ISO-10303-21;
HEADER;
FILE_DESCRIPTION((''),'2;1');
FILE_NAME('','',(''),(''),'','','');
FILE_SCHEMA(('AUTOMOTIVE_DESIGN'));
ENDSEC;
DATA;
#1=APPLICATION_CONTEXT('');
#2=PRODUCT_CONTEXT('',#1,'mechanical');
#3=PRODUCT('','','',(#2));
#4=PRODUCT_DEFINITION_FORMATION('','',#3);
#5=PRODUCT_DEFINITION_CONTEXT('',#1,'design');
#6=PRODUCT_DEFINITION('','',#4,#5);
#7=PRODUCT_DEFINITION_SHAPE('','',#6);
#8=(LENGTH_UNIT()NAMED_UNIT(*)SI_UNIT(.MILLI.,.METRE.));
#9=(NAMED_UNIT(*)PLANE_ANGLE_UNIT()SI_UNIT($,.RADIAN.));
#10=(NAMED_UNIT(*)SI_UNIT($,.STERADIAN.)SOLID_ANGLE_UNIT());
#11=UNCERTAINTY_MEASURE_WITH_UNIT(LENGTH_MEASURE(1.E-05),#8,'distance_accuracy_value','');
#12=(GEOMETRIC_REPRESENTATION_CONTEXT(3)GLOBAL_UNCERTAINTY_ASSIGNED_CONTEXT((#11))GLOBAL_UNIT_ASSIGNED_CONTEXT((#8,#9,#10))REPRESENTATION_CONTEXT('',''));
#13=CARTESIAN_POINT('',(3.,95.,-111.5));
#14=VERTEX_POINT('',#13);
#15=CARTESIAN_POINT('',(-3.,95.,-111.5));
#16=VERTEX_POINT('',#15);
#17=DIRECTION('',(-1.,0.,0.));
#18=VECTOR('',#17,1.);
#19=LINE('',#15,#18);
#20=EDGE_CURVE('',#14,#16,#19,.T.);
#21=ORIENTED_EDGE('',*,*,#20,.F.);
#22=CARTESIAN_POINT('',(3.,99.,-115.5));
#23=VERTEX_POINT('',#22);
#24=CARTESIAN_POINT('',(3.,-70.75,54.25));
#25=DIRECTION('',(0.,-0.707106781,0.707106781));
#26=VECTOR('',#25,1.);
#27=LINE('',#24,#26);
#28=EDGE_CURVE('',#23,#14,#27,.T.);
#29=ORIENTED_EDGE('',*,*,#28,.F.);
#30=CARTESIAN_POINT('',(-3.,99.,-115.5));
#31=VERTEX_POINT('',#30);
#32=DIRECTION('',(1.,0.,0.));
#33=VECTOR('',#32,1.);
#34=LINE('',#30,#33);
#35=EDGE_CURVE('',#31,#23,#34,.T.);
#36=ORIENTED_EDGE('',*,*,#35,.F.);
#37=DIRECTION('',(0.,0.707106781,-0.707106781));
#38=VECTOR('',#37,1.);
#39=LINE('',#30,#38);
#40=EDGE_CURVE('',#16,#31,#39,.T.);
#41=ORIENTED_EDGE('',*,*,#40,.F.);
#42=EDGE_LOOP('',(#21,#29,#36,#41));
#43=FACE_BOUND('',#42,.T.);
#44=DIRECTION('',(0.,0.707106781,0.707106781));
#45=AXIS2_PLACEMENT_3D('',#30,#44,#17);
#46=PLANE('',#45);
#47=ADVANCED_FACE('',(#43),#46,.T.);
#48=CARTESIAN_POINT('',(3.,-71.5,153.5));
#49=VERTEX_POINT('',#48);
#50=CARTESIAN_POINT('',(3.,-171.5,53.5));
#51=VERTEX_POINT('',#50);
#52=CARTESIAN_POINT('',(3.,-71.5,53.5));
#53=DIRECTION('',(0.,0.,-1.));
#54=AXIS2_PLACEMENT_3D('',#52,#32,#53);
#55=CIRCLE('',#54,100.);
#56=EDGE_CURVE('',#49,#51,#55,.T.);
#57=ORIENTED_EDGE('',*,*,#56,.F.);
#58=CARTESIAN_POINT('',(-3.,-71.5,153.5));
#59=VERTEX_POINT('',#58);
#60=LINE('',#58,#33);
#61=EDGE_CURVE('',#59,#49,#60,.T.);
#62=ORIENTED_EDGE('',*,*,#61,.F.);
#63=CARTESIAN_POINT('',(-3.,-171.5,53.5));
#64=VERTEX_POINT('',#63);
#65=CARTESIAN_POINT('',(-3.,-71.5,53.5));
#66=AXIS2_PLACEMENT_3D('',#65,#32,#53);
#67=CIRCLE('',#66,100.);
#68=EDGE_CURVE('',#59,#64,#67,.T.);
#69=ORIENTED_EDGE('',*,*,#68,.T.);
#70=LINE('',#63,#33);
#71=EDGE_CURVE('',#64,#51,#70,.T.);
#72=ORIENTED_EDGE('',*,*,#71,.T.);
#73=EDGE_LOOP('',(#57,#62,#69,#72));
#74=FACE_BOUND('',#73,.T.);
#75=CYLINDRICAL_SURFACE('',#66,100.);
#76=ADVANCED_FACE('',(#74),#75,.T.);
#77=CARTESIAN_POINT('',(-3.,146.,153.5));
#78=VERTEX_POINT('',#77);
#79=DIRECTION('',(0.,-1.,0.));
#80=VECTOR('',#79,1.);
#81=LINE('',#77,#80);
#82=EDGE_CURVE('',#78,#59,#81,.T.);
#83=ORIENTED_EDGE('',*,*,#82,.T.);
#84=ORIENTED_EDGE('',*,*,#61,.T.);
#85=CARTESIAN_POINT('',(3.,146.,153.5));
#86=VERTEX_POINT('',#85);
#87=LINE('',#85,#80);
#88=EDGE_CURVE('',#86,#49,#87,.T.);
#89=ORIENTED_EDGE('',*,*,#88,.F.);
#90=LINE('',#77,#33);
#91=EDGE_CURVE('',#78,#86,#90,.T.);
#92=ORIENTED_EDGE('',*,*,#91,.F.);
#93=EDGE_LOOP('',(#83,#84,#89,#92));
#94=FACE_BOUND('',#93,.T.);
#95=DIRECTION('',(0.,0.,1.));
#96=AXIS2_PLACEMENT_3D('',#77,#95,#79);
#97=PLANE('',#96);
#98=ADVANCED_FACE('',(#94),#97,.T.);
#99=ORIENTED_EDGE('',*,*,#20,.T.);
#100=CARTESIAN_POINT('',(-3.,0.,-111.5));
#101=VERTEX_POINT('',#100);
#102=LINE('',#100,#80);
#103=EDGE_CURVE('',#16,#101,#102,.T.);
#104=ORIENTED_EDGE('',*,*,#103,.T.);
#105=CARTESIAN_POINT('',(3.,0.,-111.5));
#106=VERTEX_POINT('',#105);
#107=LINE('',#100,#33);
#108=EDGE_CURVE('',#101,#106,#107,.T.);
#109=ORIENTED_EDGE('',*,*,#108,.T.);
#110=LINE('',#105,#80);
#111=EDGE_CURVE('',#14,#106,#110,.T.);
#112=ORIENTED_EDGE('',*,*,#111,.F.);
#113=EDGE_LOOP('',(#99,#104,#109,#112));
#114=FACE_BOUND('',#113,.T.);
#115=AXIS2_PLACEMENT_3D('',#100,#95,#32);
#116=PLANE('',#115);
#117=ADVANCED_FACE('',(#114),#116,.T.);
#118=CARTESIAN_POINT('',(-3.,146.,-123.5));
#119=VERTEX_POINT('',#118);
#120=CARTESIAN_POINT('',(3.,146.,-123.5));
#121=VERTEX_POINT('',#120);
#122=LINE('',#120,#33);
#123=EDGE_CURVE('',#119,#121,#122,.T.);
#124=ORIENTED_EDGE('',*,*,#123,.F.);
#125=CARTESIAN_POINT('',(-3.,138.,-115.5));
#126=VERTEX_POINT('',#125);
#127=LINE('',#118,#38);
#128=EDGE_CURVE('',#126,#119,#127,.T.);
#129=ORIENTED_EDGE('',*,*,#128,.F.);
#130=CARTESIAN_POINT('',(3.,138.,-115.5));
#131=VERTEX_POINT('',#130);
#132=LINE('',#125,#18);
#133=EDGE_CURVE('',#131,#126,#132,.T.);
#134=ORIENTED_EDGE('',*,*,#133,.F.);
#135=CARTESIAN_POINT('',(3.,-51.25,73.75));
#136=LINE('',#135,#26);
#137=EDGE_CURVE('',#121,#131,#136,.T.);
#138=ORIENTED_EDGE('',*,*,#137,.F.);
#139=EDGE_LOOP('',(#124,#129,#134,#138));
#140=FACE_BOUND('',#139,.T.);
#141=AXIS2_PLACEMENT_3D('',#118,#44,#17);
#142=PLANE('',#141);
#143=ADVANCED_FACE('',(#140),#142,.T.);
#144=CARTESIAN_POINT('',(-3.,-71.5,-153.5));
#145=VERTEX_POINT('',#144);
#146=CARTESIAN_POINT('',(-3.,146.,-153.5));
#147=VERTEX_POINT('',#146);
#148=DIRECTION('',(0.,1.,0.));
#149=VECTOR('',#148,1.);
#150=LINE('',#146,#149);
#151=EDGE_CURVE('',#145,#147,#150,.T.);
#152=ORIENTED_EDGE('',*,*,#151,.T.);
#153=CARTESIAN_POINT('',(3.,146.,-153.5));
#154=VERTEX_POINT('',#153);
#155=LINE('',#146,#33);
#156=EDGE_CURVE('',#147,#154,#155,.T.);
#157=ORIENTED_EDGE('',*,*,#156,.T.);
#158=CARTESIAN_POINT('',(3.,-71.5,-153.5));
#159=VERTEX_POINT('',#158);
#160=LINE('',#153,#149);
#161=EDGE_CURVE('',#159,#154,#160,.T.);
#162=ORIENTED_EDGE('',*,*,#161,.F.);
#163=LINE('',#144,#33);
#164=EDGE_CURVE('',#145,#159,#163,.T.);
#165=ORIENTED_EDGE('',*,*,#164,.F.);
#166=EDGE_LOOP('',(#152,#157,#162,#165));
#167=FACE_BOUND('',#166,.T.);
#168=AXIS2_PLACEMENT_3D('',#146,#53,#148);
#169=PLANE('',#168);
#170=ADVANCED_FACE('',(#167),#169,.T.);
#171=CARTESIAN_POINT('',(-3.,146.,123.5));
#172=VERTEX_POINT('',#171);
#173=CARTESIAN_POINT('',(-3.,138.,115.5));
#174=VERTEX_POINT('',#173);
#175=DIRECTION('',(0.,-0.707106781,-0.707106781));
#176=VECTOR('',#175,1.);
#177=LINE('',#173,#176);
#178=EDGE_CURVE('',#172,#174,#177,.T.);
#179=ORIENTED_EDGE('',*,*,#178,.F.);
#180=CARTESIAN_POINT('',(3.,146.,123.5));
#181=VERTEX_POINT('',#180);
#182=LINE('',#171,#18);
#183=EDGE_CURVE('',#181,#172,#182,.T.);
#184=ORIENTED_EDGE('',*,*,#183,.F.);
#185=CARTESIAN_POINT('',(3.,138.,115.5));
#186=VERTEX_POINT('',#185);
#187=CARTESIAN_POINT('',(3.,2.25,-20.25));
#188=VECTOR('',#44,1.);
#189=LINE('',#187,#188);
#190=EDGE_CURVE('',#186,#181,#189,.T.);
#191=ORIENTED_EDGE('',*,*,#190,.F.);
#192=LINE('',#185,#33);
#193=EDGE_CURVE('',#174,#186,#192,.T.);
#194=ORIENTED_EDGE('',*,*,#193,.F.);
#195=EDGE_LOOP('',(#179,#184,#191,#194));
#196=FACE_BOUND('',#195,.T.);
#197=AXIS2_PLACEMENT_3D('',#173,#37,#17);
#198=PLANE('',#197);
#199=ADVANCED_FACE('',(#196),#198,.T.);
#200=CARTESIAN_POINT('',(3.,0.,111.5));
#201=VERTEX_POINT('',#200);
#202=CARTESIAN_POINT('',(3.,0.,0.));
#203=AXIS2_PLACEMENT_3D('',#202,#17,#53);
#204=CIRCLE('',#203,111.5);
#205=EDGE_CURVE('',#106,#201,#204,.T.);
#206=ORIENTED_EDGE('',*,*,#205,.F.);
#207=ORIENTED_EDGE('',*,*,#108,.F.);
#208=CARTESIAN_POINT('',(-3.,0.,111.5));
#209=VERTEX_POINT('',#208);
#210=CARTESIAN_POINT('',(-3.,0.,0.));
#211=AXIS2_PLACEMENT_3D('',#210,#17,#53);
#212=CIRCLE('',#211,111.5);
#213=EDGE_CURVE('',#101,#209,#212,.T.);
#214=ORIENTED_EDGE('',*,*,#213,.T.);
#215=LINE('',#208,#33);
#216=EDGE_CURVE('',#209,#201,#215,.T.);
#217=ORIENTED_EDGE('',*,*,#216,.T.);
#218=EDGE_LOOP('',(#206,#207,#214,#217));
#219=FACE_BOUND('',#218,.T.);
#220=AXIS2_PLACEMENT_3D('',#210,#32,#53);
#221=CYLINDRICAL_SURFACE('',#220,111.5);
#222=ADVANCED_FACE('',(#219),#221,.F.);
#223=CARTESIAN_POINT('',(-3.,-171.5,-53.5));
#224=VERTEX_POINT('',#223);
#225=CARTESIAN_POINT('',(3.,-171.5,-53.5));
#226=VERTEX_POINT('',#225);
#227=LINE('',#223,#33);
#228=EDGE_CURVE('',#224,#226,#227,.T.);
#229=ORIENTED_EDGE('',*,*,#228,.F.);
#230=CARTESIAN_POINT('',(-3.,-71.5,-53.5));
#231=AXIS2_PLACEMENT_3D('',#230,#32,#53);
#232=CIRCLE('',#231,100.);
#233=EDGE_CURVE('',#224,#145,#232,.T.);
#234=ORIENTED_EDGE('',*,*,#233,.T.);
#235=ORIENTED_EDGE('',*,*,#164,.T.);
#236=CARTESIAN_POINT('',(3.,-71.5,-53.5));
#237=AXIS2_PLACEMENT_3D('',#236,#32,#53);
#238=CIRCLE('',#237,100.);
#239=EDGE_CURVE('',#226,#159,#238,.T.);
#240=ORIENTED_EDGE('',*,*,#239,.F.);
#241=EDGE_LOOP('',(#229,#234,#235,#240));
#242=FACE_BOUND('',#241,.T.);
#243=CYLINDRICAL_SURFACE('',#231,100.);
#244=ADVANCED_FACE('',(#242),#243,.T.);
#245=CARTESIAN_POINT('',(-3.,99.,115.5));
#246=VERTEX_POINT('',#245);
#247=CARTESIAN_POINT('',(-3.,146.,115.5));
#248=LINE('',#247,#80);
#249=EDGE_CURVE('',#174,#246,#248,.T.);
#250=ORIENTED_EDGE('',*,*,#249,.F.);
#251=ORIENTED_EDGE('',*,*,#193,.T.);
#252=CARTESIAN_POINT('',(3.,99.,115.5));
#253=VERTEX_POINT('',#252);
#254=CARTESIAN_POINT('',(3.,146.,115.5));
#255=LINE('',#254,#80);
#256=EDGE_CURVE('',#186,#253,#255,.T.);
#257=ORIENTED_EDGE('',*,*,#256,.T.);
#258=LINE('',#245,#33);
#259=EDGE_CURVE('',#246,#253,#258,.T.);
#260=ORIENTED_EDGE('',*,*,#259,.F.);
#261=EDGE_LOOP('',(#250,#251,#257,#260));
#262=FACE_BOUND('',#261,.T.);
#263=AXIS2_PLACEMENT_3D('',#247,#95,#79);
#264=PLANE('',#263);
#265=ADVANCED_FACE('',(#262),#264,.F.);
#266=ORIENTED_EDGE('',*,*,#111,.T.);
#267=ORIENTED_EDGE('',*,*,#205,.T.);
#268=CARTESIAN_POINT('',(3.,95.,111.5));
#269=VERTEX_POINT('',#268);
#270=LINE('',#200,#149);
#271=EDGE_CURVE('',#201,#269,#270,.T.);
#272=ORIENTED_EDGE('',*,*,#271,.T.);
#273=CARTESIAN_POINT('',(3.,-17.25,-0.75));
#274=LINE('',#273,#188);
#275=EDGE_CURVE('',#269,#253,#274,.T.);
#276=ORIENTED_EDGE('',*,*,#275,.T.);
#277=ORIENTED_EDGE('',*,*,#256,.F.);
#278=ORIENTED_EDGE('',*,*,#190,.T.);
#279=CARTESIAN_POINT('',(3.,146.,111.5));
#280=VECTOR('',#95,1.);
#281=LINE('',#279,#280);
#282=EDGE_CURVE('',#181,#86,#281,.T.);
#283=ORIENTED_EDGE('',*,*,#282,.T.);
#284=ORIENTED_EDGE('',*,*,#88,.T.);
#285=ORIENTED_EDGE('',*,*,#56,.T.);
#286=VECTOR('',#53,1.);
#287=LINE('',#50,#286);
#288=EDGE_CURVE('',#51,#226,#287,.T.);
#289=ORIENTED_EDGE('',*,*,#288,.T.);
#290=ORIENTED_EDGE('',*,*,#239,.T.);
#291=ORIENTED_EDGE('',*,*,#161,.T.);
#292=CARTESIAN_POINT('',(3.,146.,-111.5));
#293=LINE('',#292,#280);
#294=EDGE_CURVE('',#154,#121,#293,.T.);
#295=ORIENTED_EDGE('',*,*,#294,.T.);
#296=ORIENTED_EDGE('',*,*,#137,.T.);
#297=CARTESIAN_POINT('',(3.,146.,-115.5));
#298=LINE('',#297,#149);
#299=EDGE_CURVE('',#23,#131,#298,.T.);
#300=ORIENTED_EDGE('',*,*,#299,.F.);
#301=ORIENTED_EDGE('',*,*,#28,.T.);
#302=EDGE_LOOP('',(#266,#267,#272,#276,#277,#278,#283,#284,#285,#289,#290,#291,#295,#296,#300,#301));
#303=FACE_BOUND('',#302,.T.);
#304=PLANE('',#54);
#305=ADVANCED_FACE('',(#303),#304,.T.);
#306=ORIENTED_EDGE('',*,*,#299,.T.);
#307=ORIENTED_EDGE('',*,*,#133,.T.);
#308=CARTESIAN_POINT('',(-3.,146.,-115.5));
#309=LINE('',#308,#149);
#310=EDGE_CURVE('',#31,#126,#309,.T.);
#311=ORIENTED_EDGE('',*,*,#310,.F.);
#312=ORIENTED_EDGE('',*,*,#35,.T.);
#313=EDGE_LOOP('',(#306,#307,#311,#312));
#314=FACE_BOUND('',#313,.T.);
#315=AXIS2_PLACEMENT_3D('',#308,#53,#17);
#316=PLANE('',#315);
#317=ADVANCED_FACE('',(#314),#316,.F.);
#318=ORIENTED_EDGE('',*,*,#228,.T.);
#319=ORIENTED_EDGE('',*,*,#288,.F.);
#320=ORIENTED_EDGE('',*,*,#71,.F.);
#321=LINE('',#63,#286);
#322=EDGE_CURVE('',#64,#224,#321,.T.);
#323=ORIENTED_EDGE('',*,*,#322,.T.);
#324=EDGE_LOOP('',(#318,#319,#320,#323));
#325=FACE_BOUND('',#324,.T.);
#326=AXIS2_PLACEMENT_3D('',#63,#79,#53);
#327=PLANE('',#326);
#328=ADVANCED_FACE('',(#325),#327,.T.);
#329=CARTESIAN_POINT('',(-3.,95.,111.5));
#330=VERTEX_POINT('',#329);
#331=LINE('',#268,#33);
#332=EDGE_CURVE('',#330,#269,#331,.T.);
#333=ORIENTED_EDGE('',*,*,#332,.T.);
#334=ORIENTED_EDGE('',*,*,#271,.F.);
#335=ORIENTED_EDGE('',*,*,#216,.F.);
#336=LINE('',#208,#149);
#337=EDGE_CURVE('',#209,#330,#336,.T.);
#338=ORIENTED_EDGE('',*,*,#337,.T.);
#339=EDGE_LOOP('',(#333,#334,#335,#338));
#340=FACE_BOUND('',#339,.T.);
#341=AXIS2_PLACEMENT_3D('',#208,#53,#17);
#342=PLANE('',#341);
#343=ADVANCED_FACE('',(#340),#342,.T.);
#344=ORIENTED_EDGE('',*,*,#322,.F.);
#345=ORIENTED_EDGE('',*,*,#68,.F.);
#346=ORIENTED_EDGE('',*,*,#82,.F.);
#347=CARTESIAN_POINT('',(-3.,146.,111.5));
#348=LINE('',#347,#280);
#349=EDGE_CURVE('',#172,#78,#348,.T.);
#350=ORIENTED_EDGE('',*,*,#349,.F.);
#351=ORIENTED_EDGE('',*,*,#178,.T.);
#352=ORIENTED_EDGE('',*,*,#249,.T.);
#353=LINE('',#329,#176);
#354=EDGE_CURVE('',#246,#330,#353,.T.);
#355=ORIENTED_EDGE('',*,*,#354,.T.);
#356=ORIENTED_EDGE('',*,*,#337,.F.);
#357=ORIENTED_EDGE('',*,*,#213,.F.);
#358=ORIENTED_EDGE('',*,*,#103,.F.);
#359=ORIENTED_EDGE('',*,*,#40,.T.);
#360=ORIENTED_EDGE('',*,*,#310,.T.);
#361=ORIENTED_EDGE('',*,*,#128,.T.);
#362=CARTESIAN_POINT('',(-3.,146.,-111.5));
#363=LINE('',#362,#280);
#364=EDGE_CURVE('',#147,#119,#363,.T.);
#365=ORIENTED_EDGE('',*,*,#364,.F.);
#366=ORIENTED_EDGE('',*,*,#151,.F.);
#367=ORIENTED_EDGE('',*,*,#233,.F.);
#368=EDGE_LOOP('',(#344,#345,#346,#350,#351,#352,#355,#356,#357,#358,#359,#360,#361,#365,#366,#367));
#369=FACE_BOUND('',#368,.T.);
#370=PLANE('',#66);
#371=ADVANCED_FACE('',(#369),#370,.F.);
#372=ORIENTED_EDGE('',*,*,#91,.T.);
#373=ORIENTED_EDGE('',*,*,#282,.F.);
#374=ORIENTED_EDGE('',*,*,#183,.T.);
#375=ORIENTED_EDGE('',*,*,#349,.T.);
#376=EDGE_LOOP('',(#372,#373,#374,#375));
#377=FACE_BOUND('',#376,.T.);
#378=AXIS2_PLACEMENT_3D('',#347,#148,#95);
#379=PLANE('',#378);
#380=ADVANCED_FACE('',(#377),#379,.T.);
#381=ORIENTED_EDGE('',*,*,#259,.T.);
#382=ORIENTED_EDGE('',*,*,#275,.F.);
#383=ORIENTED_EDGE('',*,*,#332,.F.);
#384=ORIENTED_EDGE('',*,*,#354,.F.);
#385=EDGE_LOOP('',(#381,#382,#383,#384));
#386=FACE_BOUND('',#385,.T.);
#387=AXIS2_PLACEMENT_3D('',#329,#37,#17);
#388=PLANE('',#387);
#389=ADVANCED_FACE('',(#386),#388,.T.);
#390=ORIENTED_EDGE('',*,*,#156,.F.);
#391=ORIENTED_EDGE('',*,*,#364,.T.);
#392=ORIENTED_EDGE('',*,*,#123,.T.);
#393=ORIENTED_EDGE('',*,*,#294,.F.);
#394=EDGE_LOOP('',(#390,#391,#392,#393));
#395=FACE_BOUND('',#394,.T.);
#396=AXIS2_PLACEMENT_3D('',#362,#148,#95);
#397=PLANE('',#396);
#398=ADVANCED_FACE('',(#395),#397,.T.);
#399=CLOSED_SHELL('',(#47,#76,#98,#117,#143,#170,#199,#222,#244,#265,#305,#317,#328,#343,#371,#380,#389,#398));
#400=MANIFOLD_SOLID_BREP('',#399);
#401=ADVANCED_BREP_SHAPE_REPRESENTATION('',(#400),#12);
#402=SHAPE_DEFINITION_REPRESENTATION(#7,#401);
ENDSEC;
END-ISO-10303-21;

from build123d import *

# Parameters (mm, degrees)
SM_START                 = -3
SM_BASE_FLANGE_1_DEPTH   = 6
CUT_EXTRUDE_1_DEPTH      = 231.181450165
CUT_EXTRUDE_1_DEPTH_BACK = 231.181450165
SKETCH_7_W               = 4
SKETCH_7_H               = 47
CHAMFER_2_SIZE           = 8
CHAMFER_3_SIZE           = 4


# Read off the part's stored shape, not the designer's step: Базовая кромка1
with BuildPart() as part:
    # Базовая кромка1 outline → Базовая кромка1 (new body)
    with BuildSketch(Plane(origin=(0, 0, 0), x_dir=(0, 0, -1), z_dir=(1, 0, 0)).offset(SM_START)):
        with BuildLine():
            Line((-111.5, 0), (-111.5, 146))
            Line((-111.5, 146), (-153.5, 146))
            Line((-153.5, 146), (-153.5, -71.5))
            ThreePointArc((-153.5, -71.5), (-124.210678119, -142.210678119), (-53.5, -171.5))
            Line((-53.5, -171.5), (53.5, -171.5))
            ThreePointArc((53.5, -171.5), (124.210678119, -142.210678119), (153.5, -71.5))
            Line((153.5, -71.5), (153.5, 146))
            Line((153.5, 146), (111.5, 146))
            Line((111.5, 146), (111.5, 0))
            ThreePointArc((111.5, 0), (0, -111.5), (-111.5, 0))
        make_face()
    extrude(amount=SM_BASE_FLANGE_1_DEPTH)

    # Эскиз7 → Вырез-Вытянуть1 (cut, two sides: drawn at the far end of the back side and taken through both)
    with BuildSketch(Plane(origin=(0, 0, 0), x_dir=(0, 0, -1), z_dir=(1, 0, 0)).offset(-CUT_EXTRUDE_1_DEPTH_BACK)):
        with Locations((-113.5, 122.5)):
            Rectangle(SKETCH_7_W, SKETCH_7_H)
        with Locations((113.5, 122.5)):
            Rectangle(SKETCH_7_W, SKETCH_7_H)
    extrude(amount=CUT_EXTRUDE_1_DEPTH + CUT_EXTRUDE_1_DEPTH_BACK, mode=Mode.SUBTRACT)

    # Фаска2
    chamfer_2_edges = [part.edges().sort_by_distance(p)[0] for p in [
        (0, 146, 115.5),
        (0, 146, -115.5),
    ]]
    chamfer(chamfer_2_edges, length=CHAMFER_2_SIZE)

    # Фаска3
    chamfer_3_edges = [part.edges().sort_by_distance(p)[0] for p in [
        (0, 99, -111.5),
        (0, 99, 111.5),
    ]]
    chamfer(chamfer_3_edges, length=CHAMFER_3_SIZE - 0.0001)  # a hair under: the kernel refuses the full size


solid = part.part
